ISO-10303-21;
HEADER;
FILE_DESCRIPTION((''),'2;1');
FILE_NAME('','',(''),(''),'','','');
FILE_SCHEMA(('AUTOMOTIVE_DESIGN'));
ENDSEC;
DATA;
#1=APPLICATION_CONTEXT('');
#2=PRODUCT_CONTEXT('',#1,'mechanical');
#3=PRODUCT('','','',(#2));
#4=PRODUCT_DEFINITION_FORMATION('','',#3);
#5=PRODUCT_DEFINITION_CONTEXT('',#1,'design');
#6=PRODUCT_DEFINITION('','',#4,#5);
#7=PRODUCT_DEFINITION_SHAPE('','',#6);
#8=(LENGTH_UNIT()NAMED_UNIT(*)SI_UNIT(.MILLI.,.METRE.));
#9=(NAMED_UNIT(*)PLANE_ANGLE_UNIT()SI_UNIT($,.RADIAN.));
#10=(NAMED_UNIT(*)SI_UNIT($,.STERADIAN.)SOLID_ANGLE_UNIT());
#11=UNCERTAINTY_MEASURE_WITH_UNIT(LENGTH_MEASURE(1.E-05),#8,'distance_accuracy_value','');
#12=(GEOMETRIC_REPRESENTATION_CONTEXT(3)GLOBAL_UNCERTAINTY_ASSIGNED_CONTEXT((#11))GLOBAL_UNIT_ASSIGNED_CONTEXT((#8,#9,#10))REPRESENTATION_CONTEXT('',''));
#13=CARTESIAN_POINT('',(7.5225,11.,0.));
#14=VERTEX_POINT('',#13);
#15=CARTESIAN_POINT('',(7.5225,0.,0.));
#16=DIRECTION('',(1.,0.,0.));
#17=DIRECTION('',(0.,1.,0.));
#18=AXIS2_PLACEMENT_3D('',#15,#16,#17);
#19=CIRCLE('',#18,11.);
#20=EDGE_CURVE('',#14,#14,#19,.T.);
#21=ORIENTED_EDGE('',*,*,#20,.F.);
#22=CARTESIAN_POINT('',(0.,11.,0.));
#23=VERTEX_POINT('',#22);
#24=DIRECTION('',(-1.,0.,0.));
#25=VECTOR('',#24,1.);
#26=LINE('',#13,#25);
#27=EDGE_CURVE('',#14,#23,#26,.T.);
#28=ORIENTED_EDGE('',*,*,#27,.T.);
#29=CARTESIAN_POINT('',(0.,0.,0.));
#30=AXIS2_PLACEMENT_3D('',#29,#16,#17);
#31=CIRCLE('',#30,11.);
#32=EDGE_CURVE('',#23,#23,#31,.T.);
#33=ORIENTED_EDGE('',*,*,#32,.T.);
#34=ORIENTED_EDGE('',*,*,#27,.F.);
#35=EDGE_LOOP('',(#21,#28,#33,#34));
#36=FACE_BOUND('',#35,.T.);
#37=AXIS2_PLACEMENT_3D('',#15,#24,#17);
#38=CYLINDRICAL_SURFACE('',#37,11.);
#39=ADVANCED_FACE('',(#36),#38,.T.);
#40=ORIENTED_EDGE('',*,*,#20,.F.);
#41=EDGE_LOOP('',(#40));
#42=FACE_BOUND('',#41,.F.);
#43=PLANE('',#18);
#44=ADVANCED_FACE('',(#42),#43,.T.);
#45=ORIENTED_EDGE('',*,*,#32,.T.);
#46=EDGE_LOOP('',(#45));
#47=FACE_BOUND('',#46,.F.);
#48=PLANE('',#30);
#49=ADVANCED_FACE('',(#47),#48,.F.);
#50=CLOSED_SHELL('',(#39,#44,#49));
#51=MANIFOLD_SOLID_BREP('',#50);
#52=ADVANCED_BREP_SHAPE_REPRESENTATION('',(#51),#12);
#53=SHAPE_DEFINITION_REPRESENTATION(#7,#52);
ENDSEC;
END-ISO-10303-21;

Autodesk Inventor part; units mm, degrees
ref_plane "YZ Plane" through (0, 0, 0) normal (1, 0, 0) x (0, 1, 0)
ref_plane "XZ Plane" through (0, 0, 0) normal (0, 1, 0) x (-1, 0, 0)
sketch "Section Profile" plane through (0, 0, 0) normal (0, 0, 1) x (1, 0, 0)
  line L0 (0, 0) -> (7.5225, 0)
  line L1 (7.5225, 0) -> (7.5225, 6.5537)
  line L2 (7.5225, 6.5537) -> (0, 6.5537)
  line L3 (0, 6.5537) -> (0, 0)
  line L4 (0, 0) -> (7.5225, 0)
  line L5 (7.5225, 0) -> (7.5225, 11)
  line L6 (7.5225, 11) -> (0, 11)
  line L7 (0, 11) -> (0, 0)
  point P0 (3.7612, 11)
  dimension "d0" = 7.5225
  dimension "d1" = 7.5225
  dimension "d2" = 3.7612
  dimension "d3" = 13.1074
  dimension "d4" = 22
ref_plane "Chain Plane" through (3.7612, 11, 0) normal (1, 0, 0) x (0, 1, 0)
revolve "Shroud" add sketch "Section Profile" angle 360 about axis through (0, 0, 0) along (1, 0, 0) contours L3 L2 L1 L0
revolve "Strand" add sketch "Section Profile" angle 360 about axis through (0, 0, 0) along (1, 0, 0)
pattern_of_one "Strand Pattern"
equation "\"d0\" = da_Bf"
equation "\"d1\" = da_Bs"
equation "\"d3\" = da_Ds"
equation "\"d4\" = da_D"
equation "\"d9\" = da_pt"
equation "\"da_D\" = 22"
equation "\"da_Ds\" = 13.10739"
equation "\"da_Bf\" = 7.52246"
equation "\"da_Bs\" = 7.52246"
equation "\"da_pt\" = 14.3764"
properties part number "Flat Idler1" material "Steel"
